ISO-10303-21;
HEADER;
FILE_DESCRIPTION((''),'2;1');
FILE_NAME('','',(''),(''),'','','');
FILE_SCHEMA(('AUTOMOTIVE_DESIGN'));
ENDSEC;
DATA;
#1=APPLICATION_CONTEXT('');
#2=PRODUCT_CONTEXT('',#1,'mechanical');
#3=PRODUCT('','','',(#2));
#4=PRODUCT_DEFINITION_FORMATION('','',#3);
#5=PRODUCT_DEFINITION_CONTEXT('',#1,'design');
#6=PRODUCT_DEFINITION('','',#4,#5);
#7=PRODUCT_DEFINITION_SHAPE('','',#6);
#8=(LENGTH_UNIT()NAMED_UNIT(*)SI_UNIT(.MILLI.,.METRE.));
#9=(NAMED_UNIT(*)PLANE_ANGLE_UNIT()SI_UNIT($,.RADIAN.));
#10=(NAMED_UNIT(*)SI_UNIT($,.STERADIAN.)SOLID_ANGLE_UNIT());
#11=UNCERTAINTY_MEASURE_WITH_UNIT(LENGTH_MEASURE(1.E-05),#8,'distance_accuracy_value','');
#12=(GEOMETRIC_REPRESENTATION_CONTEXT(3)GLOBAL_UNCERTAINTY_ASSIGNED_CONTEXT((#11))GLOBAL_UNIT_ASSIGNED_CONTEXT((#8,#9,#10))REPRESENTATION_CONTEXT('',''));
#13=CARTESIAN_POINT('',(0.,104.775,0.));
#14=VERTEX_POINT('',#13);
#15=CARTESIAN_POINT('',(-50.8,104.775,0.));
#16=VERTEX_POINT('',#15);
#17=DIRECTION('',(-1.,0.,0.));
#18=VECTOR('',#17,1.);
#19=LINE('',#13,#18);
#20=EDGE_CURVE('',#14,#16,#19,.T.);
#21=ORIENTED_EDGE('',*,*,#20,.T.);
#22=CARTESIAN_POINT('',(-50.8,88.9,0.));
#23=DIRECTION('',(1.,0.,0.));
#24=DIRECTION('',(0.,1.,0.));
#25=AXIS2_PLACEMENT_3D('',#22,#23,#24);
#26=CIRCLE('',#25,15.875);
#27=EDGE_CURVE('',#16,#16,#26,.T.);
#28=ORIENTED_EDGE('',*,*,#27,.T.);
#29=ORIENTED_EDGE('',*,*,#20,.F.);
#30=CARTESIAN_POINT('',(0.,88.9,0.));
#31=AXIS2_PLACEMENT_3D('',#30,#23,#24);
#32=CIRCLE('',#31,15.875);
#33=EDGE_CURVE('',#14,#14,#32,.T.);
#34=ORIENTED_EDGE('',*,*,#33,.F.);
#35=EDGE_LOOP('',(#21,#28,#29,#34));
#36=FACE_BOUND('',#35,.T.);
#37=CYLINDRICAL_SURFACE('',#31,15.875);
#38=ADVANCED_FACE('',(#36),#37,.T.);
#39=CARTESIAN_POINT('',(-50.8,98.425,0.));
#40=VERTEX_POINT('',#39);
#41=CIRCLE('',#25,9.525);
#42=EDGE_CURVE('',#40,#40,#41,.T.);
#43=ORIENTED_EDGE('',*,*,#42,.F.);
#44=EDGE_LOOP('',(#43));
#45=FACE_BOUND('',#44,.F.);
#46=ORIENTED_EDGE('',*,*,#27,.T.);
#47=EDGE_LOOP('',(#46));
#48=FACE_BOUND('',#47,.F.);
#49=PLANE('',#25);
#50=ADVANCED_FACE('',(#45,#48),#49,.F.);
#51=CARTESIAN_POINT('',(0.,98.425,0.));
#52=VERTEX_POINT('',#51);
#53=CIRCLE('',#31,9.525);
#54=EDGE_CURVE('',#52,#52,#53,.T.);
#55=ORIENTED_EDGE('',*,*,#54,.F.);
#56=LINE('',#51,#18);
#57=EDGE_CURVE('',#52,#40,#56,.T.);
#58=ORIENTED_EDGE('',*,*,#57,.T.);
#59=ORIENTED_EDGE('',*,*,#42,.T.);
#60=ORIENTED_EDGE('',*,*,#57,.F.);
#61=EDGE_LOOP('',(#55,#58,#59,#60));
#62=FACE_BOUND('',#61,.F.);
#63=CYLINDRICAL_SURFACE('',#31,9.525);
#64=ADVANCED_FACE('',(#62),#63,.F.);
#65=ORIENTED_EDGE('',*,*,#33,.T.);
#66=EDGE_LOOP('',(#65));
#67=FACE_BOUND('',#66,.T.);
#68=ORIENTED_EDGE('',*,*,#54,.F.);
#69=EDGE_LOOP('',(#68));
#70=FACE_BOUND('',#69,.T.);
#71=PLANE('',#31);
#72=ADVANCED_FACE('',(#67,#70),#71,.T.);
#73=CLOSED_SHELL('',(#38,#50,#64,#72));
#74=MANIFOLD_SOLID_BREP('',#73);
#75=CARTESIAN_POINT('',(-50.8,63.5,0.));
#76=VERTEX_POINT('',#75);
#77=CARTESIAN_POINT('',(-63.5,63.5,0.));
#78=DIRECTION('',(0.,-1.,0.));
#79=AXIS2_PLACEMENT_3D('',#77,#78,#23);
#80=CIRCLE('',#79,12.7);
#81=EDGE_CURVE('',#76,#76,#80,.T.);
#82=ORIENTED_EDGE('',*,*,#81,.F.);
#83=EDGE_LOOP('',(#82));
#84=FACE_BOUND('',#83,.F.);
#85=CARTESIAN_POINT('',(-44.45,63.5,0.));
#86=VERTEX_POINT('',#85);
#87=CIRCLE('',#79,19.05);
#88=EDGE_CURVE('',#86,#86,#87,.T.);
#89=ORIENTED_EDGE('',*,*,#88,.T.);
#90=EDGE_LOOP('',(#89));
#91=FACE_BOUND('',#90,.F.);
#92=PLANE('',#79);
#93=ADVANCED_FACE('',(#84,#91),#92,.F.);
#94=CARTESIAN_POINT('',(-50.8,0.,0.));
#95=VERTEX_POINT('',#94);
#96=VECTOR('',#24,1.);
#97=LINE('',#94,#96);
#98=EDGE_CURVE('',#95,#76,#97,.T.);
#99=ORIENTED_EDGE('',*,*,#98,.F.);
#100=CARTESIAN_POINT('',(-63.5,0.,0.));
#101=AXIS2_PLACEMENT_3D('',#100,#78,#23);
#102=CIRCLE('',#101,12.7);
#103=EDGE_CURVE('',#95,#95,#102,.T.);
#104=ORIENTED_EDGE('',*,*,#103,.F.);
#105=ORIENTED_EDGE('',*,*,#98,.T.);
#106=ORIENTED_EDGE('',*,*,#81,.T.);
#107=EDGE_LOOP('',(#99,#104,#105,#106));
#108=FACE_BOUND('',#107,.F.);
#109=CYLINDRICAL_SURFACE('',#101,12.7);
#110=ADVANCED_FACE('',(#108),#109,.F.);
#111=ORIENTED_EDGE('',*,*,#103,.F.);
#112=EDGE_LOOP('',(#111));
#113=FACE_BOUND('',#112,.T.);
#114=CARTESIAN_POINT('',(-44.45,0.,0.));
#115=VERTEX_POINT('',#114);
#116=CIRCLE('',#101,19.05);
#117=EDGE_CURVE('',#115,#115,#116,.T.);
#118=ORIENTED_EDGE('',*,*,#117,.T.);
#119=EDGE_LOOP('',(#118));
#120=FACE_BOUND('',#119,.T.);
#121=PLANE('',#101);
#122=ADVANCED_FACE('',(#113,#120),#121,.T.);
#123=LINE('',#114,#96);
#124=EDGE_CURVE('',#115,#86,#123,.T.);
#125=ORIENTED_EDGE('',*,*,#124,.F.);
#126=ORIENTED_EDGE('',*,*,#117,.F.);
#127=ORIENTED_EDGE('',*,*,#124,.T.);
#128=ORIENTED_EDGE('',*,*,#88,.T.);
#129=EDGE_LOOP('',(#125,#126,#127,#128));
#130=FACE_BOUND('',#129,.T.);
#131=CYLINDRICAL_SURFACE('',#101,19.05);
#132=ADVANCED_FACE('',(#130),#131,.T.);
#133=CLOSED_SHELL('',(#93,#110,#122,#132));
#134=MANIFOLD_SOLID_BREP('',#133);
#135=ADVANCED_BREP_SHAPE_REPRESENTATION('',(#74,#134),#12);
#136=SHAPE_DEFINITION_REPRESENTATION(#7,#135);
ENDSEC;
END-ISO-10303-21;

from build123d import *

# Parameters (mm, degrees)
F0_R     = 19.05
F0_R_2   = 12.7
F2_DEPTH = 63.5
F3_R     = 15.875
F3_R_2   = 9.525
F5_DEPTH = 50.8


# Not quite as in the source:
# - a variable given as a bare number and used for a length is read in inches; the dataset says mm whatever the document's units were


with BuildPart() as f2:
    # F0 (on Front) → F2 (new body)
    with BuildSketch(Plane.XZ):
        with Locations((-63.5, 0)):
            Circle(F0_R)
        with Locations((-63.5, 0)):
            Circle(F0_R_2, mode=Mode.SUBTRACT)
    extrude(amount=-F2_DEPTH)


with BuildPart() as f5:
    # F3 (on Right) → F5 (new body)
    with BuildSketch(Plane.YZ):
        with Locations((88.9, 0)):
            Circle(F3_R)
        with Locations((88.9, 0)):
            Circle(F3_R_2, mode=Mode.SUBTRACT)
    extrude(amount=-F5_DEPTH)


solid = Compound([f2.part, f5.part])
